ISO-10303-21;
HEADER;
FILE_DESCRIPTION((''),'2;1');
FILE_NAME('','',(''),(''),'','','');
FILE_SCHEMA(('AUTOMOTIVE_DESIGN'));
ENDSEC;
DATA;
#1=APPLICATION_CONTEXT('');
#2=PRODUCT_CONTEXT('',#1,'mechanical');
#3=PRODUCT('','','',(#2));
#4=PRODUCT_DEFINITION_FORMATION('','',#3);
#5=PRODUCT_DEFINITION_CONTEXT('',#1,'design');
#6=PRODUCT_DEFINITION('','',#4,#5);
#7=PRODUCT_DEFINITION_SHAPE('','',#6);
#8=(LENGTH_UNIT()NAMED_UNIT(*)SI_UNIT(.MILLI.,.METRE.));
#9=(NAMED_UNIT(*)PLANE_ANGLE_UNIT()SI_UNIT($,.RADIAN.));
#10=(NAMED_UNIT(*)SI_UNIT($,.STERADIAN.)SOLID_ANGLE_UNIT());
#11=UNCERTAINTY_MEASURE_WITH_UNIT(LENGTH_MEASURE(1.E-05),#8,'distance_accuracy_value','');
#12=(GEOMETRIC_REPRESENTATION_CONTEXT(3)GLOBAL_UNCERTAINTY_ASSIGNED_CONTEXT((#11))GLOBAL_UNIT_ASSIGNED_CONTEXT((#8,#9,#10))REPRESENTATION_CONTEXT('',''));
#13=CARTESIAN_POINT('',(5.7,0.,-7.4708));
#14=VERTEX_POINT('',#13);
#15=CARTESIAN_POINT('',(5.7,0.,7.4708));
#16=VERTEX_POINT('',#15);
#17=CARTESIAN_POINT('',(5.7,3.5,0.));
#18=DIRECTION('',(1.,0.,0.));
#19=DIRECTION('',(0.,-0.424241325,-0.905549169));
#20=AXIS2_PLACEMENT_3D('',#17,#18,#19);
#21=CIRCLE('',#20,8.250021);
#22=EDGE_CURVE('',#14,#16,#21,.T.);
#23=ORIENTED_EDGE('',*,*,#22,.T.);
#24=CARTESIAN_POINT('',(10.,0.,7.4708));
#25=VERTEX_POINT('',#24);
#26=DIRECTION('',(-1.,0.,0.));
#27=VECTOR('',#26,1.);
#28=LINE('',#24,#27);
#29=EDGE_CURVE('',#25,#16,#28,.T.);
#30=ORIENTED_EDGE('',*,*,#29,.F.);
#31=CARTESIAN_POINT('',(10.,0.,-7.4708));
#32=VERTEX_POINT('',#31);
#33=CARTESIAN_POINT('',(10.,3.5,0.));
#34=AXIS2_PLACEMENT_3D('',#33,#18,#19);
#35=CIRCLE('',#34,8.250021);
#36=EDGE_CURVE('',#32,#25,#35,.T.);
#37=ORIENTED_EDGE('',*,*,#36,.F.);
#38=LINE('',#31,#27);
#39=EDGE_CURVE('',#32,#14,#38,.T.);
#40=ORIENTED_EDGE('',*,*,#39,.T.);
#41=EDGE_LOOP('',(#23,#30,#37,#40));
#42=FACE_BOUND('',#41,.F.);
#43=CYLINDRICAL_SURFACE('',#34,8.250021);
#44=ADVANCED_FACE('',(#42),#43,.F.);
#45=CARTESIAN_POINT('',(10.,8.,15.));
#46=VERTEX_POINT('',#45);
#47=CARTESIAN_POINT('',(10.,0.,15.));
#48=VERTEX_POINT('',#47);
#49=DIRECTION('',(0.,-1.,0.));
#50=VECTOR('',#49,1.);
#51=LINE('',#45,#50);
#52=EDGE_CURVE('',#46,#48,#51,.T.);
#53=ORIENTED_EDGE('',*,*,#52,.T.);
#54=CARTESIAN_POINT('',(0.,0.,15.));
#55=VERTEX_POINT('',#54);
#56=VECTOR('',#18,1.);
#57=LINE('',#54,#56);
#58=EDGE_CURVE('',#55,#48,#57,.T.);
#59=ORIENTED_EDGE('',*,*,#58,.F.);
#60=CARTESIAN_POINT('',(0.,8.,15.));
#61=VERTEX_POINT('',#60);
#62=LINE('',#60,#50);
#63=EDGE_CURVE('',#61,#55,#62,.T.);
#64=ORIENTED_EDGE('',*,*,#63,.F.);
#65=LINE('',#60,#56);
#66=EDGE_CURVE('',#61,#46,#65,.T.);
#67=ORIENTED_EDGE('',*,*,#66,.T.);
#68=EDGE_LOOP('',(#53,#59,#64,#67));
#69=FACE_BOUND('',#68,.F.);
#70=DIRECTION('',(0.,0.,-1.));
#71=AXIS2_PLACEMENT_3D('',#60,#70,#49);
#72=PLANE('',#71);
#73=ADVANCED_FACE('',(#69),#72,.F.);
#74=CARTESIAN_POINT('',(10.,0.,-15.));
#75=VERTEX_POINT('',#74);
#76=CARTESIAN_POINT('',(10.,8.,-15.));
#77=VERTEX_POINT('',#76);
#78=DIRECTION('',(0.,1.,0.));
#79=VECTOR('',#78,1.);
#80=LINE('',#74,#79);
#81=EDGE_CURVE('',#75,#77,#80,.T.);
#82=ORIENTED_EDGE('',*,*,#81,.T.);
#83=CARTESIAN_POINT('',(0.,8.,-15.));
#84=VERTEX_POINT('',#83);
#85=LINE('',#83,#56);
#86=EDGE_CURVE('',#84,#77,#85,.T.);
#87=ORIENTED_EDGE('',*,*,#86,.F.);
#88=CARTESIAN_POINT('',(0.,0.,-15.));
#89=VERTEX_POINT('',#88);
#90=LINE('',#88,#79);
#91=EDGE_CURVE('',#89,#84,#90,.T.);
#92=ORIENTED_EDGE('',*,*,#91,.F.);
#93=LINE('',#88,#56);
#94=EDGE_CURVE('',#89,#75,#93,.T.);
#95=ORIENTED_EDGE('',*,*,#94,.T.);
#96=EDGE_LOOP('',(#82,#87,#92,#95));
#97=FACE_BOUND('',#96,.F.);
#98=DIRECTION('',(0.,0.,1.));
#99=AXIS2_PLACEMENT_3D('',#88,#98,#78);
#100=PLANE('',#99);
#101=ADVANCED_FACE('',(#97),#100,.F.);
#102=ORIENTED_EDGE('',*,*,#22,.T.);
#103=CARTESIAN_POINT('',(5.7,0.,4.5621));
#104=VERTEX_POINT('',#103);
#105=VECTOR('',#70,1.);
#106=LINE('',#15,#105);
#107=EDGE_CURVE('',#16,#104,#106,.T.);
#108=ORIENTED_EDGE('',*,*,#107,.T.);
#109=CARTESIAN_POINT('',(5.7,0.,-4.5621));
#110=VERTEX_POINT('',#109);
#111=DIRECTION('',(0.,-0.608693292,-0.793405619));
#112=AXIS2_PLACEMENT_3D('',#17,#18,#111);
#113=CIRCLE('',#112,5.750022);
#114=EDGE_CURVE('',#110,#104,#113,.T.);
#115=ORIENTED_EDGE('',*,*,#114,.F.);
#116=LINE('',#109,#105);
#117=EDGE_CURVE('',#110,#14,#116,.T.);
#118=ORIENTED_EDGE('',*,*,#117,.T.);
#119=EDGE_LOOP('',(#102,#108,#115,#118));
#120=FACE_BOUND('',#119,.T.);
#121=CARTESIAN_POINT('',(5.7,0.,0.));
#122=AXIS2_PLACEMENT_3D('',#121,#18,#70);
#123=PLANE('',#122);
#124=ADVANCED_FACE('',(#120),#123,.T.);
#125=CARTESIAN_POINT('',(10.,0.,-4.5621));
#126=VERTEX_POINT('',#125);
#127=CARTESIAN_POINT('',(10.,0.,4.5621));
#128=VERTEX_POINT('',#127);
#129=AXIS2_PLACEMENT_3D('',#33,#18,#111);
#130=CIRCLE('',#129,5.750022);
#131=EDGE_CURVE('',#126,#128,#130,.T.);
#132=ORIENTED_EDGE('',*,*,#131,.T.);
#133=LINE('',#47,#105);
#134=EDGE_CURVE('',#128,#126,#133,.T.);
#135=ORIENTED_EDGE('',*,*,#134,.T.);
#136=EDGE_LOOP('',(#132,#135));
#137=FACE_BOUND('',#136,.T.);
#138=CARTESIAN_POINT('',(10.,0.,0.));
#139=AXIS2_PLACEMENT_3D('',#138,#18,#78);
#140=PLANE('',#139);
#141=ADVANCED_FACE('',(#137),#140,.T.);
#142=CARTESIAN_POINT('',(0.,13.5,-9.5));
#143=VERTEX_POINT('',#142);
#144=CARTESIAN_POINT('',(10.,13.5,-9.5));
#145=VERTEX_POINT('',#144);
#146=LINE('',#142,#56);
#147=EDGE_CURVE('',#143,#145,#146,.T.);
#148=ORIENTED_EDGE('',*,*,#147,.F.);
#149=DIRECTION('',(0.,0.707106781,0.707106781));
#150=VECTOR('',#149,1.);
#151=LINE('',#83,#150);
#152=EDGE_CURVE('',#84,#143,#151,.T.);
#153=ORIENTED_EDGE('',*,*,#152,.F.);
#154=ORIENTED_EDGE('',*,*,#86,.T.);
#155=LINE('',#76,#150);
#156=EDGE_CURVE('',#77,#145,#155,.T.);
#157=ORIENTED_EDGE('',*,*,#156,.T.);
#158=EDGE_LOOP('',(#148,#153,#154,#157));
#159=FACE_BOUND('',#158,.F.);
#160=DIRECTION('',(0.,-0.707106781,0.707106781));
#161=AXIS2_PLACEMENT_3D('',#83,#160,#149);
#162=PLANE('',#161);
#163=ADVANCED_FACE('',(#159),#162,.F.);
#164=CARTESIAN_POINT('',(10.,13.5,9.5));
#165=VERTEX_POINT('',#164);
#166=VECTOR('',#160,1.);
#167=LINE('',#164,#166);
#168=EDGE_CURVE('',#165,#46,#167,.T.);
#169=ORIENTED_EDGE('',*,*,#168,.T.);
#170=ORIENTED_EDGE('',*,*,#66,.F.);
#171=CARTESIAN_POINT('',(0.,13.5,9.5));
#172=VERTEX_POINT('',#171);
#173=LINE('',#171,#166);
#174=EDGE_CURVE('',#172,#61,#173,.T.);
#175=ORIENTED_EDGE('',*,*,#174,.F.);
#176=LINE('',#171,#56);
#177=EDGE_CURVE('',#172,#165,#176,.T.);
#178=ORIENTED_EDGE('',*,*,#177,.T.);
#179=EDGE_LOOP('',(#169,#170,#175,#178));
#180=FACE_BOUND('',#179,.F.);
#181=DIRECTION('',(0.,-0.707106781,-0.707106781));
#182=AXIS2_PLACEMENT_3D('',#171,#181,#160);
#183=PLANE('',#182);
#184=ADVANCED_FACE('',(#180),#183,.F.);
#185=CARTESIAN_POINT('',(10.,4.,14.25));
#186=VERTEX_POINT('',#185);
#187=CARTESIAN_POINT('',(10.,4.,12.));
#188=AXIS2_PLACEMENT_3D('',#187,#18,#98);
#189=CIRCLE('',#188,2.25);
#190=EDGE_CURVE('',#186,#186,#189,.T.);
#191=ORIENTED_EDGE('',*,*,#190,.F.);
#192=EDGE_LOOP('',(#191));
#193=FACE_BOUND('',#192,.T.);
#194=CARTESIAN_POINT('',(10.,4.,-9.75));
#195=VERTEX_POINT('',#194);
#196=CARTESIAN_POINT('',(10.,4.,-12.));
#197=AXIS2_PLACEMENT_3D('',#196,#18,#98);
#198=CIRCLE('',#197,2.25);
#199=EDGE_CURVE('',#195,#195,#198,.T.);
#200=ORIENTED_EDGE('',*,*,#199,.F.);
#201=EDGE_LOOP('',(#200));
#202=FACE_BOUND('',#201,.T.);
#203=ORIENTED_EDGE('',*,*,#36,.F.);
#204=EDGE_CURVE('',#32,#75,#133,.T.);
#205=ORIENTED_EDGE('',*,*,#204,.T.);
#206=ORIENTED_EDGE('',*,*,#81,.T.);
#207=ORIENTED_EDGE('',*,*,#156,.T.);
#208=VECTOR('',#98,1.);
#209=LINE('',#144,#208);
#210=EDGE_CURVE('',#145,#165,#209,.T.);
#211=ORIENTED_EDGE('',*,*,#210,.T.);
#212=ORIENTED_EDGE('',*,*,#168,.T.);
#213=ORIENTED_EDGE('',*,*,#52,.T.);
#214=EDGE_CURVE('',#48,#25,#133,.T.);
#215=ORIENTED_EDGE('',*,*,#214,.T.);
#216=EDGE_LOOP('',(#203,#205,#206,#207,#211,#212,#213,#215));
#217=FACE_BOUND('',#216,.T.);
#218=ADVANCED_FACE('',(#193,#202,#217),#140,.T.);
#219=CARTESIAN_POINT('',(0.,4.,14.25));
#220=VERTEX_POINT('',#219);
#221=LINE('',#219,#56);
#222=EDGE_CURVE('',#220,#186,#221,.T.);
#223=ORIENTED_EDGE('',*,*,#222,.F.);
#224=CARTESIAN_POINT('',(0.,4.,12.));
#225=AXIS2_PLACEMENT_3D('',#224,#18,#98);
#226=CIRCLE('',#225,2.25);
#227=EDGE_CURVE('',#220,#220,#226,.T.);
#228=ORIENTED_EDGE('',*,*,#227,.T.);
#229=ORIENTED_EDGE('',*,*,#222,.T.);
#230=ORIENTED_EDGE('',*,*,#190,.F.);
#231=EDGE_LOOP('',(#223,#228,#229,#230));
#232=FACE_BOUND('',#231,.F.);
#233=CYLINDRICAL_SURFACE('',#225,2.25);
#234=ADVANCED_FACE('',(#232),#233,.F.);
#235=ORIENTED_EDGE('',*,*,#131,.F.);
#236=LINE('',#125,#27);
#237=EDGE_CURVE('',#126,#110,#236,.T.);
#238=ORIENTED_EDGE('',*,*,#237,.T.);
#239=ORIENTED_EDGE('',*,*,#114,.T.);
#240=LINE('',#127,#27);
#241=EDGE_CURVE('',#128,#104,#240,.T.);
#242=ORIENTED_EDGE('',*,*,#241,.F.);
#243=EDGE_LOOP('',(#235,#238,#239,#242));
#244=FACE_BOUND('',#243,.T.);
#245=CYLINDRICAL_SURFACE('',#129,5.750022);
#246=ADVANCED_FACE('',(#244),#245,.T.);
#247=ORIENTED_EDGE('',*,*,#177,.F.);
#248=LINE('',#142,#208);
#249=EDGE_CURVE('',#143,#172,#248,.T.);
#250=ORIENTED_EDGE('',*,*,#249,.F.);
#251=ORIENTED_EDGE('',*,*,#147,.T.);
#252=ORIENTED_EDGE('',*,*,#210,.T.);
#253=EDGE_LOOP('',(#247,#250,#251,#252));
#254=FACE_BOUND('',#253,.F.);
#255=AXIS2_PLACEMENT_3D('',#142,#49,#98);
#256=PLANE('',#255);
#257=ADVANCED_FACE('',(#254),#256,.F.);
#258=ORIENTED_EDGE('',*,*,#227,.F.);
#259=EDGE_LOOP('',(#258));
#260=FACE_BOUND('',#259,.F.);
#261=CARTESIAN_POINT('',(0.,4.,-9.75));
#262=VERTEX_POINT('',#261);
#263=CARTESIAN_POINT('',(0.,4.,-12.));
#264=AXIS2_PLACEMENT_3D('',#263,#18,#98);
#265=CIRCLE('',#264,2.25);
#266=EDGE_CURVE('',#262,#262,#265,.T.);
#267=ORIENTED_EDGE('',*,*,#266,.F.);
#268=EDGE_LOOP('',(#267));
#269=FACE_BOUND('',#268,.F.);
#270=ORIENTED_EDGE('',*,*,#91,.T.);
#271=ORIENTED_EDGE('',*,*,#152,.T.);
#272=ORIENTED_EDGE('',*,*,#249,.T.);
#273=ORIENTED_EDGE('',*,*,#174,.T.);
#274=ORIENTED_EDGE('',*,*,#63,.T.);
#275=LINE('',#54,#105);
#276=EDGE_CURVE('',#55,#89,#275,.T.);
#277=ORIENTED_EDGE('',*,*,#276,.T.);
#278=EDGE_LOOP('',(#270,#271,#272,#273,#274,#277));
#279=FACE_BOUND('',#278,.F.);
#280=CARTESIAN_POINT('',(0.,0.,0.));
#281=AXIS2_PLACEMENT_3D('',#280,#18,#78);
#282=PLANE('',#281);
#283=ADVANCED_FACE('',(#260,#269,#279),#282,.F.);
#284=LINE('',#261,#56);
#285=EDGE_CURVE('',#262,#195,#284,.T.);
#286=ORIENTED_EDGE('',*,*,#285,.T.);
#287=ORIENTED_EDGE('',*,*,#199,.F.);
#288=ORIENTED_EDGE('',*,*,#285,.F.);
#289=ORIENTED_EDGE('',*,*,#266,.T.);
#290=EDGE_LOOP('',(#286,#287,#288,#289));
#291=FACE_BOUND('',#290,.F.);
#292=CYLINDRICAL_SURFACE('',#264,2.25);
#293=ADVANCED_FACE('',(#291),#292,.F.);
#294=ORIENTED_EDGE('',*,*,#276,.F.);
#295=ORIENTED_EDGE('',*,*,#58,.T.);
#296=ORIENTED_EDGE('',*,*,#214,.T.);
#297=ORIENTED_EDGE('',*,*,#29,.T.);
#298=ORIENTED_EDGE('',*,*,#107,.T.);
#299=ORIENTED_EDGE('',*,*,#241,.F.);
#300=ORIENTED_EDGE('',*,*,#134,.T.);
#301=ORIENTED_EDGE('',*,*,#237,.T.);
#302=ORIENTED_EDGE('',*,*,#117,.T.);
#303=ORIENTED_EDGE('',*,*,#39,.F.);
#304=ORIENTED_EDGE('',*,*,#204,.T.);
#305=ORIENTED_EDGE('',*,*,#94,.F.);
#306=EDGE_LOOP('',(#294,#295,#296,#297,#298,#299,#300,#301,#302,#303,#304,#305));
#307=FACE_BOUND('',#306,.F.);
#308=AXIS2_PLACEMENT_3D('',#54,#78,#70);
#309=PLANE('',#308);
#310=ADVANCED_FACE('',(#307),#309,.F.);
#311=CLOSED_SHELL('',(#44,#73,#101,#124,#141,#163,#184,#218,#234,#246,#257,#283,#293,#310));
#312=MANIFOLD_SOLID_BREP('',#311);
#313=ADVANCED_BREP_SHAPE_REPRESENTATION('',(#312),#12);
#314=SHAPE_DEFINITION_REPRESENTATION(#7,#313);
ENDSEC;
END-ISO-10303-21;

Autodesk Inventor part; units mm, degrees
ref_plane "YZ Plane" through (0, 0, 0) normal (1, 0, 0) x (0, 1, 0)
ref_plane "XZ Plane" through (0, 0, 0) normal (0, 1, 0) x (-1, 0, 0)
ref_plane "XY Plane" through (0, 0, 0) normal (0, 0, 1) x (1, 0, 0)
sketch "Sketch1" plane through (0, 0, 0) normal (1, 0, 0) x (0, 1, 0)
  line L0 (13.5, 9.5) -> (8, 15)
  line L1 (8, 15) -> (0, 15)
  line L2 (0, 15) -> (0, -15)
  line L3 (8, -15) -> (13.5, -9.5)
  line L4 (13.5, -9.5) -> (13.5, 9.5)
  line L5 (0, -15) -> (8, -15)
  point P0 (0, 0)
  dimension "d21" = 30
  dimension "d22" = 8
  dimension "d23" = 13.5
extrude "Extrusion2" add sketch "Sketch1" along normal blind 10
sketch "Sketch2" plane through (10, 0, 0) normal (1, 0, 0) x (0, 0, -1)
  line L0 (4.5621, 0) -> (7.4708, 0)
  arc A0 (4.5621, 0) -> (-4.5621, 0) centre (0, 3.5) ccw
  arc A1 (7.4708, 0) -> (-7.4708, 0) centre (0, 3.5) ccw
  line L1 (-7.4708, 0) -> (-4.5621, 0)
  line L2 (-15, 0) -> (15, 0) projected
  point P0 (0, 0)
  dimension "d18" = 5.75
  dimension "d19" = 3.5
  dimension "d20" = 8.25
extrude "Extrusion1" cut sketch "Sketch2" against normal blind 4.3 contours A0 L1 A1 L0
hole "Hole2" at (0, 4, -12) direction (1, 0, 0) diameter 4.5 depth 10
sketch "Sketch3" plane through (0, 0, 0) normal (1, 0, 0) x (0, 1, 0)
  point P0 (4, -12)
hole "Hole1" at (0, 4, 12) direction (1, 0, 0) diameter 4.5 depth 10
sketch "Sketch4" plane through (0, 0, 0) normal (1, 0, 0) x (0, 1, 0)
  point P0 (4, 12)
properties part number "Spreader Holder" material "ASA Plastic"
